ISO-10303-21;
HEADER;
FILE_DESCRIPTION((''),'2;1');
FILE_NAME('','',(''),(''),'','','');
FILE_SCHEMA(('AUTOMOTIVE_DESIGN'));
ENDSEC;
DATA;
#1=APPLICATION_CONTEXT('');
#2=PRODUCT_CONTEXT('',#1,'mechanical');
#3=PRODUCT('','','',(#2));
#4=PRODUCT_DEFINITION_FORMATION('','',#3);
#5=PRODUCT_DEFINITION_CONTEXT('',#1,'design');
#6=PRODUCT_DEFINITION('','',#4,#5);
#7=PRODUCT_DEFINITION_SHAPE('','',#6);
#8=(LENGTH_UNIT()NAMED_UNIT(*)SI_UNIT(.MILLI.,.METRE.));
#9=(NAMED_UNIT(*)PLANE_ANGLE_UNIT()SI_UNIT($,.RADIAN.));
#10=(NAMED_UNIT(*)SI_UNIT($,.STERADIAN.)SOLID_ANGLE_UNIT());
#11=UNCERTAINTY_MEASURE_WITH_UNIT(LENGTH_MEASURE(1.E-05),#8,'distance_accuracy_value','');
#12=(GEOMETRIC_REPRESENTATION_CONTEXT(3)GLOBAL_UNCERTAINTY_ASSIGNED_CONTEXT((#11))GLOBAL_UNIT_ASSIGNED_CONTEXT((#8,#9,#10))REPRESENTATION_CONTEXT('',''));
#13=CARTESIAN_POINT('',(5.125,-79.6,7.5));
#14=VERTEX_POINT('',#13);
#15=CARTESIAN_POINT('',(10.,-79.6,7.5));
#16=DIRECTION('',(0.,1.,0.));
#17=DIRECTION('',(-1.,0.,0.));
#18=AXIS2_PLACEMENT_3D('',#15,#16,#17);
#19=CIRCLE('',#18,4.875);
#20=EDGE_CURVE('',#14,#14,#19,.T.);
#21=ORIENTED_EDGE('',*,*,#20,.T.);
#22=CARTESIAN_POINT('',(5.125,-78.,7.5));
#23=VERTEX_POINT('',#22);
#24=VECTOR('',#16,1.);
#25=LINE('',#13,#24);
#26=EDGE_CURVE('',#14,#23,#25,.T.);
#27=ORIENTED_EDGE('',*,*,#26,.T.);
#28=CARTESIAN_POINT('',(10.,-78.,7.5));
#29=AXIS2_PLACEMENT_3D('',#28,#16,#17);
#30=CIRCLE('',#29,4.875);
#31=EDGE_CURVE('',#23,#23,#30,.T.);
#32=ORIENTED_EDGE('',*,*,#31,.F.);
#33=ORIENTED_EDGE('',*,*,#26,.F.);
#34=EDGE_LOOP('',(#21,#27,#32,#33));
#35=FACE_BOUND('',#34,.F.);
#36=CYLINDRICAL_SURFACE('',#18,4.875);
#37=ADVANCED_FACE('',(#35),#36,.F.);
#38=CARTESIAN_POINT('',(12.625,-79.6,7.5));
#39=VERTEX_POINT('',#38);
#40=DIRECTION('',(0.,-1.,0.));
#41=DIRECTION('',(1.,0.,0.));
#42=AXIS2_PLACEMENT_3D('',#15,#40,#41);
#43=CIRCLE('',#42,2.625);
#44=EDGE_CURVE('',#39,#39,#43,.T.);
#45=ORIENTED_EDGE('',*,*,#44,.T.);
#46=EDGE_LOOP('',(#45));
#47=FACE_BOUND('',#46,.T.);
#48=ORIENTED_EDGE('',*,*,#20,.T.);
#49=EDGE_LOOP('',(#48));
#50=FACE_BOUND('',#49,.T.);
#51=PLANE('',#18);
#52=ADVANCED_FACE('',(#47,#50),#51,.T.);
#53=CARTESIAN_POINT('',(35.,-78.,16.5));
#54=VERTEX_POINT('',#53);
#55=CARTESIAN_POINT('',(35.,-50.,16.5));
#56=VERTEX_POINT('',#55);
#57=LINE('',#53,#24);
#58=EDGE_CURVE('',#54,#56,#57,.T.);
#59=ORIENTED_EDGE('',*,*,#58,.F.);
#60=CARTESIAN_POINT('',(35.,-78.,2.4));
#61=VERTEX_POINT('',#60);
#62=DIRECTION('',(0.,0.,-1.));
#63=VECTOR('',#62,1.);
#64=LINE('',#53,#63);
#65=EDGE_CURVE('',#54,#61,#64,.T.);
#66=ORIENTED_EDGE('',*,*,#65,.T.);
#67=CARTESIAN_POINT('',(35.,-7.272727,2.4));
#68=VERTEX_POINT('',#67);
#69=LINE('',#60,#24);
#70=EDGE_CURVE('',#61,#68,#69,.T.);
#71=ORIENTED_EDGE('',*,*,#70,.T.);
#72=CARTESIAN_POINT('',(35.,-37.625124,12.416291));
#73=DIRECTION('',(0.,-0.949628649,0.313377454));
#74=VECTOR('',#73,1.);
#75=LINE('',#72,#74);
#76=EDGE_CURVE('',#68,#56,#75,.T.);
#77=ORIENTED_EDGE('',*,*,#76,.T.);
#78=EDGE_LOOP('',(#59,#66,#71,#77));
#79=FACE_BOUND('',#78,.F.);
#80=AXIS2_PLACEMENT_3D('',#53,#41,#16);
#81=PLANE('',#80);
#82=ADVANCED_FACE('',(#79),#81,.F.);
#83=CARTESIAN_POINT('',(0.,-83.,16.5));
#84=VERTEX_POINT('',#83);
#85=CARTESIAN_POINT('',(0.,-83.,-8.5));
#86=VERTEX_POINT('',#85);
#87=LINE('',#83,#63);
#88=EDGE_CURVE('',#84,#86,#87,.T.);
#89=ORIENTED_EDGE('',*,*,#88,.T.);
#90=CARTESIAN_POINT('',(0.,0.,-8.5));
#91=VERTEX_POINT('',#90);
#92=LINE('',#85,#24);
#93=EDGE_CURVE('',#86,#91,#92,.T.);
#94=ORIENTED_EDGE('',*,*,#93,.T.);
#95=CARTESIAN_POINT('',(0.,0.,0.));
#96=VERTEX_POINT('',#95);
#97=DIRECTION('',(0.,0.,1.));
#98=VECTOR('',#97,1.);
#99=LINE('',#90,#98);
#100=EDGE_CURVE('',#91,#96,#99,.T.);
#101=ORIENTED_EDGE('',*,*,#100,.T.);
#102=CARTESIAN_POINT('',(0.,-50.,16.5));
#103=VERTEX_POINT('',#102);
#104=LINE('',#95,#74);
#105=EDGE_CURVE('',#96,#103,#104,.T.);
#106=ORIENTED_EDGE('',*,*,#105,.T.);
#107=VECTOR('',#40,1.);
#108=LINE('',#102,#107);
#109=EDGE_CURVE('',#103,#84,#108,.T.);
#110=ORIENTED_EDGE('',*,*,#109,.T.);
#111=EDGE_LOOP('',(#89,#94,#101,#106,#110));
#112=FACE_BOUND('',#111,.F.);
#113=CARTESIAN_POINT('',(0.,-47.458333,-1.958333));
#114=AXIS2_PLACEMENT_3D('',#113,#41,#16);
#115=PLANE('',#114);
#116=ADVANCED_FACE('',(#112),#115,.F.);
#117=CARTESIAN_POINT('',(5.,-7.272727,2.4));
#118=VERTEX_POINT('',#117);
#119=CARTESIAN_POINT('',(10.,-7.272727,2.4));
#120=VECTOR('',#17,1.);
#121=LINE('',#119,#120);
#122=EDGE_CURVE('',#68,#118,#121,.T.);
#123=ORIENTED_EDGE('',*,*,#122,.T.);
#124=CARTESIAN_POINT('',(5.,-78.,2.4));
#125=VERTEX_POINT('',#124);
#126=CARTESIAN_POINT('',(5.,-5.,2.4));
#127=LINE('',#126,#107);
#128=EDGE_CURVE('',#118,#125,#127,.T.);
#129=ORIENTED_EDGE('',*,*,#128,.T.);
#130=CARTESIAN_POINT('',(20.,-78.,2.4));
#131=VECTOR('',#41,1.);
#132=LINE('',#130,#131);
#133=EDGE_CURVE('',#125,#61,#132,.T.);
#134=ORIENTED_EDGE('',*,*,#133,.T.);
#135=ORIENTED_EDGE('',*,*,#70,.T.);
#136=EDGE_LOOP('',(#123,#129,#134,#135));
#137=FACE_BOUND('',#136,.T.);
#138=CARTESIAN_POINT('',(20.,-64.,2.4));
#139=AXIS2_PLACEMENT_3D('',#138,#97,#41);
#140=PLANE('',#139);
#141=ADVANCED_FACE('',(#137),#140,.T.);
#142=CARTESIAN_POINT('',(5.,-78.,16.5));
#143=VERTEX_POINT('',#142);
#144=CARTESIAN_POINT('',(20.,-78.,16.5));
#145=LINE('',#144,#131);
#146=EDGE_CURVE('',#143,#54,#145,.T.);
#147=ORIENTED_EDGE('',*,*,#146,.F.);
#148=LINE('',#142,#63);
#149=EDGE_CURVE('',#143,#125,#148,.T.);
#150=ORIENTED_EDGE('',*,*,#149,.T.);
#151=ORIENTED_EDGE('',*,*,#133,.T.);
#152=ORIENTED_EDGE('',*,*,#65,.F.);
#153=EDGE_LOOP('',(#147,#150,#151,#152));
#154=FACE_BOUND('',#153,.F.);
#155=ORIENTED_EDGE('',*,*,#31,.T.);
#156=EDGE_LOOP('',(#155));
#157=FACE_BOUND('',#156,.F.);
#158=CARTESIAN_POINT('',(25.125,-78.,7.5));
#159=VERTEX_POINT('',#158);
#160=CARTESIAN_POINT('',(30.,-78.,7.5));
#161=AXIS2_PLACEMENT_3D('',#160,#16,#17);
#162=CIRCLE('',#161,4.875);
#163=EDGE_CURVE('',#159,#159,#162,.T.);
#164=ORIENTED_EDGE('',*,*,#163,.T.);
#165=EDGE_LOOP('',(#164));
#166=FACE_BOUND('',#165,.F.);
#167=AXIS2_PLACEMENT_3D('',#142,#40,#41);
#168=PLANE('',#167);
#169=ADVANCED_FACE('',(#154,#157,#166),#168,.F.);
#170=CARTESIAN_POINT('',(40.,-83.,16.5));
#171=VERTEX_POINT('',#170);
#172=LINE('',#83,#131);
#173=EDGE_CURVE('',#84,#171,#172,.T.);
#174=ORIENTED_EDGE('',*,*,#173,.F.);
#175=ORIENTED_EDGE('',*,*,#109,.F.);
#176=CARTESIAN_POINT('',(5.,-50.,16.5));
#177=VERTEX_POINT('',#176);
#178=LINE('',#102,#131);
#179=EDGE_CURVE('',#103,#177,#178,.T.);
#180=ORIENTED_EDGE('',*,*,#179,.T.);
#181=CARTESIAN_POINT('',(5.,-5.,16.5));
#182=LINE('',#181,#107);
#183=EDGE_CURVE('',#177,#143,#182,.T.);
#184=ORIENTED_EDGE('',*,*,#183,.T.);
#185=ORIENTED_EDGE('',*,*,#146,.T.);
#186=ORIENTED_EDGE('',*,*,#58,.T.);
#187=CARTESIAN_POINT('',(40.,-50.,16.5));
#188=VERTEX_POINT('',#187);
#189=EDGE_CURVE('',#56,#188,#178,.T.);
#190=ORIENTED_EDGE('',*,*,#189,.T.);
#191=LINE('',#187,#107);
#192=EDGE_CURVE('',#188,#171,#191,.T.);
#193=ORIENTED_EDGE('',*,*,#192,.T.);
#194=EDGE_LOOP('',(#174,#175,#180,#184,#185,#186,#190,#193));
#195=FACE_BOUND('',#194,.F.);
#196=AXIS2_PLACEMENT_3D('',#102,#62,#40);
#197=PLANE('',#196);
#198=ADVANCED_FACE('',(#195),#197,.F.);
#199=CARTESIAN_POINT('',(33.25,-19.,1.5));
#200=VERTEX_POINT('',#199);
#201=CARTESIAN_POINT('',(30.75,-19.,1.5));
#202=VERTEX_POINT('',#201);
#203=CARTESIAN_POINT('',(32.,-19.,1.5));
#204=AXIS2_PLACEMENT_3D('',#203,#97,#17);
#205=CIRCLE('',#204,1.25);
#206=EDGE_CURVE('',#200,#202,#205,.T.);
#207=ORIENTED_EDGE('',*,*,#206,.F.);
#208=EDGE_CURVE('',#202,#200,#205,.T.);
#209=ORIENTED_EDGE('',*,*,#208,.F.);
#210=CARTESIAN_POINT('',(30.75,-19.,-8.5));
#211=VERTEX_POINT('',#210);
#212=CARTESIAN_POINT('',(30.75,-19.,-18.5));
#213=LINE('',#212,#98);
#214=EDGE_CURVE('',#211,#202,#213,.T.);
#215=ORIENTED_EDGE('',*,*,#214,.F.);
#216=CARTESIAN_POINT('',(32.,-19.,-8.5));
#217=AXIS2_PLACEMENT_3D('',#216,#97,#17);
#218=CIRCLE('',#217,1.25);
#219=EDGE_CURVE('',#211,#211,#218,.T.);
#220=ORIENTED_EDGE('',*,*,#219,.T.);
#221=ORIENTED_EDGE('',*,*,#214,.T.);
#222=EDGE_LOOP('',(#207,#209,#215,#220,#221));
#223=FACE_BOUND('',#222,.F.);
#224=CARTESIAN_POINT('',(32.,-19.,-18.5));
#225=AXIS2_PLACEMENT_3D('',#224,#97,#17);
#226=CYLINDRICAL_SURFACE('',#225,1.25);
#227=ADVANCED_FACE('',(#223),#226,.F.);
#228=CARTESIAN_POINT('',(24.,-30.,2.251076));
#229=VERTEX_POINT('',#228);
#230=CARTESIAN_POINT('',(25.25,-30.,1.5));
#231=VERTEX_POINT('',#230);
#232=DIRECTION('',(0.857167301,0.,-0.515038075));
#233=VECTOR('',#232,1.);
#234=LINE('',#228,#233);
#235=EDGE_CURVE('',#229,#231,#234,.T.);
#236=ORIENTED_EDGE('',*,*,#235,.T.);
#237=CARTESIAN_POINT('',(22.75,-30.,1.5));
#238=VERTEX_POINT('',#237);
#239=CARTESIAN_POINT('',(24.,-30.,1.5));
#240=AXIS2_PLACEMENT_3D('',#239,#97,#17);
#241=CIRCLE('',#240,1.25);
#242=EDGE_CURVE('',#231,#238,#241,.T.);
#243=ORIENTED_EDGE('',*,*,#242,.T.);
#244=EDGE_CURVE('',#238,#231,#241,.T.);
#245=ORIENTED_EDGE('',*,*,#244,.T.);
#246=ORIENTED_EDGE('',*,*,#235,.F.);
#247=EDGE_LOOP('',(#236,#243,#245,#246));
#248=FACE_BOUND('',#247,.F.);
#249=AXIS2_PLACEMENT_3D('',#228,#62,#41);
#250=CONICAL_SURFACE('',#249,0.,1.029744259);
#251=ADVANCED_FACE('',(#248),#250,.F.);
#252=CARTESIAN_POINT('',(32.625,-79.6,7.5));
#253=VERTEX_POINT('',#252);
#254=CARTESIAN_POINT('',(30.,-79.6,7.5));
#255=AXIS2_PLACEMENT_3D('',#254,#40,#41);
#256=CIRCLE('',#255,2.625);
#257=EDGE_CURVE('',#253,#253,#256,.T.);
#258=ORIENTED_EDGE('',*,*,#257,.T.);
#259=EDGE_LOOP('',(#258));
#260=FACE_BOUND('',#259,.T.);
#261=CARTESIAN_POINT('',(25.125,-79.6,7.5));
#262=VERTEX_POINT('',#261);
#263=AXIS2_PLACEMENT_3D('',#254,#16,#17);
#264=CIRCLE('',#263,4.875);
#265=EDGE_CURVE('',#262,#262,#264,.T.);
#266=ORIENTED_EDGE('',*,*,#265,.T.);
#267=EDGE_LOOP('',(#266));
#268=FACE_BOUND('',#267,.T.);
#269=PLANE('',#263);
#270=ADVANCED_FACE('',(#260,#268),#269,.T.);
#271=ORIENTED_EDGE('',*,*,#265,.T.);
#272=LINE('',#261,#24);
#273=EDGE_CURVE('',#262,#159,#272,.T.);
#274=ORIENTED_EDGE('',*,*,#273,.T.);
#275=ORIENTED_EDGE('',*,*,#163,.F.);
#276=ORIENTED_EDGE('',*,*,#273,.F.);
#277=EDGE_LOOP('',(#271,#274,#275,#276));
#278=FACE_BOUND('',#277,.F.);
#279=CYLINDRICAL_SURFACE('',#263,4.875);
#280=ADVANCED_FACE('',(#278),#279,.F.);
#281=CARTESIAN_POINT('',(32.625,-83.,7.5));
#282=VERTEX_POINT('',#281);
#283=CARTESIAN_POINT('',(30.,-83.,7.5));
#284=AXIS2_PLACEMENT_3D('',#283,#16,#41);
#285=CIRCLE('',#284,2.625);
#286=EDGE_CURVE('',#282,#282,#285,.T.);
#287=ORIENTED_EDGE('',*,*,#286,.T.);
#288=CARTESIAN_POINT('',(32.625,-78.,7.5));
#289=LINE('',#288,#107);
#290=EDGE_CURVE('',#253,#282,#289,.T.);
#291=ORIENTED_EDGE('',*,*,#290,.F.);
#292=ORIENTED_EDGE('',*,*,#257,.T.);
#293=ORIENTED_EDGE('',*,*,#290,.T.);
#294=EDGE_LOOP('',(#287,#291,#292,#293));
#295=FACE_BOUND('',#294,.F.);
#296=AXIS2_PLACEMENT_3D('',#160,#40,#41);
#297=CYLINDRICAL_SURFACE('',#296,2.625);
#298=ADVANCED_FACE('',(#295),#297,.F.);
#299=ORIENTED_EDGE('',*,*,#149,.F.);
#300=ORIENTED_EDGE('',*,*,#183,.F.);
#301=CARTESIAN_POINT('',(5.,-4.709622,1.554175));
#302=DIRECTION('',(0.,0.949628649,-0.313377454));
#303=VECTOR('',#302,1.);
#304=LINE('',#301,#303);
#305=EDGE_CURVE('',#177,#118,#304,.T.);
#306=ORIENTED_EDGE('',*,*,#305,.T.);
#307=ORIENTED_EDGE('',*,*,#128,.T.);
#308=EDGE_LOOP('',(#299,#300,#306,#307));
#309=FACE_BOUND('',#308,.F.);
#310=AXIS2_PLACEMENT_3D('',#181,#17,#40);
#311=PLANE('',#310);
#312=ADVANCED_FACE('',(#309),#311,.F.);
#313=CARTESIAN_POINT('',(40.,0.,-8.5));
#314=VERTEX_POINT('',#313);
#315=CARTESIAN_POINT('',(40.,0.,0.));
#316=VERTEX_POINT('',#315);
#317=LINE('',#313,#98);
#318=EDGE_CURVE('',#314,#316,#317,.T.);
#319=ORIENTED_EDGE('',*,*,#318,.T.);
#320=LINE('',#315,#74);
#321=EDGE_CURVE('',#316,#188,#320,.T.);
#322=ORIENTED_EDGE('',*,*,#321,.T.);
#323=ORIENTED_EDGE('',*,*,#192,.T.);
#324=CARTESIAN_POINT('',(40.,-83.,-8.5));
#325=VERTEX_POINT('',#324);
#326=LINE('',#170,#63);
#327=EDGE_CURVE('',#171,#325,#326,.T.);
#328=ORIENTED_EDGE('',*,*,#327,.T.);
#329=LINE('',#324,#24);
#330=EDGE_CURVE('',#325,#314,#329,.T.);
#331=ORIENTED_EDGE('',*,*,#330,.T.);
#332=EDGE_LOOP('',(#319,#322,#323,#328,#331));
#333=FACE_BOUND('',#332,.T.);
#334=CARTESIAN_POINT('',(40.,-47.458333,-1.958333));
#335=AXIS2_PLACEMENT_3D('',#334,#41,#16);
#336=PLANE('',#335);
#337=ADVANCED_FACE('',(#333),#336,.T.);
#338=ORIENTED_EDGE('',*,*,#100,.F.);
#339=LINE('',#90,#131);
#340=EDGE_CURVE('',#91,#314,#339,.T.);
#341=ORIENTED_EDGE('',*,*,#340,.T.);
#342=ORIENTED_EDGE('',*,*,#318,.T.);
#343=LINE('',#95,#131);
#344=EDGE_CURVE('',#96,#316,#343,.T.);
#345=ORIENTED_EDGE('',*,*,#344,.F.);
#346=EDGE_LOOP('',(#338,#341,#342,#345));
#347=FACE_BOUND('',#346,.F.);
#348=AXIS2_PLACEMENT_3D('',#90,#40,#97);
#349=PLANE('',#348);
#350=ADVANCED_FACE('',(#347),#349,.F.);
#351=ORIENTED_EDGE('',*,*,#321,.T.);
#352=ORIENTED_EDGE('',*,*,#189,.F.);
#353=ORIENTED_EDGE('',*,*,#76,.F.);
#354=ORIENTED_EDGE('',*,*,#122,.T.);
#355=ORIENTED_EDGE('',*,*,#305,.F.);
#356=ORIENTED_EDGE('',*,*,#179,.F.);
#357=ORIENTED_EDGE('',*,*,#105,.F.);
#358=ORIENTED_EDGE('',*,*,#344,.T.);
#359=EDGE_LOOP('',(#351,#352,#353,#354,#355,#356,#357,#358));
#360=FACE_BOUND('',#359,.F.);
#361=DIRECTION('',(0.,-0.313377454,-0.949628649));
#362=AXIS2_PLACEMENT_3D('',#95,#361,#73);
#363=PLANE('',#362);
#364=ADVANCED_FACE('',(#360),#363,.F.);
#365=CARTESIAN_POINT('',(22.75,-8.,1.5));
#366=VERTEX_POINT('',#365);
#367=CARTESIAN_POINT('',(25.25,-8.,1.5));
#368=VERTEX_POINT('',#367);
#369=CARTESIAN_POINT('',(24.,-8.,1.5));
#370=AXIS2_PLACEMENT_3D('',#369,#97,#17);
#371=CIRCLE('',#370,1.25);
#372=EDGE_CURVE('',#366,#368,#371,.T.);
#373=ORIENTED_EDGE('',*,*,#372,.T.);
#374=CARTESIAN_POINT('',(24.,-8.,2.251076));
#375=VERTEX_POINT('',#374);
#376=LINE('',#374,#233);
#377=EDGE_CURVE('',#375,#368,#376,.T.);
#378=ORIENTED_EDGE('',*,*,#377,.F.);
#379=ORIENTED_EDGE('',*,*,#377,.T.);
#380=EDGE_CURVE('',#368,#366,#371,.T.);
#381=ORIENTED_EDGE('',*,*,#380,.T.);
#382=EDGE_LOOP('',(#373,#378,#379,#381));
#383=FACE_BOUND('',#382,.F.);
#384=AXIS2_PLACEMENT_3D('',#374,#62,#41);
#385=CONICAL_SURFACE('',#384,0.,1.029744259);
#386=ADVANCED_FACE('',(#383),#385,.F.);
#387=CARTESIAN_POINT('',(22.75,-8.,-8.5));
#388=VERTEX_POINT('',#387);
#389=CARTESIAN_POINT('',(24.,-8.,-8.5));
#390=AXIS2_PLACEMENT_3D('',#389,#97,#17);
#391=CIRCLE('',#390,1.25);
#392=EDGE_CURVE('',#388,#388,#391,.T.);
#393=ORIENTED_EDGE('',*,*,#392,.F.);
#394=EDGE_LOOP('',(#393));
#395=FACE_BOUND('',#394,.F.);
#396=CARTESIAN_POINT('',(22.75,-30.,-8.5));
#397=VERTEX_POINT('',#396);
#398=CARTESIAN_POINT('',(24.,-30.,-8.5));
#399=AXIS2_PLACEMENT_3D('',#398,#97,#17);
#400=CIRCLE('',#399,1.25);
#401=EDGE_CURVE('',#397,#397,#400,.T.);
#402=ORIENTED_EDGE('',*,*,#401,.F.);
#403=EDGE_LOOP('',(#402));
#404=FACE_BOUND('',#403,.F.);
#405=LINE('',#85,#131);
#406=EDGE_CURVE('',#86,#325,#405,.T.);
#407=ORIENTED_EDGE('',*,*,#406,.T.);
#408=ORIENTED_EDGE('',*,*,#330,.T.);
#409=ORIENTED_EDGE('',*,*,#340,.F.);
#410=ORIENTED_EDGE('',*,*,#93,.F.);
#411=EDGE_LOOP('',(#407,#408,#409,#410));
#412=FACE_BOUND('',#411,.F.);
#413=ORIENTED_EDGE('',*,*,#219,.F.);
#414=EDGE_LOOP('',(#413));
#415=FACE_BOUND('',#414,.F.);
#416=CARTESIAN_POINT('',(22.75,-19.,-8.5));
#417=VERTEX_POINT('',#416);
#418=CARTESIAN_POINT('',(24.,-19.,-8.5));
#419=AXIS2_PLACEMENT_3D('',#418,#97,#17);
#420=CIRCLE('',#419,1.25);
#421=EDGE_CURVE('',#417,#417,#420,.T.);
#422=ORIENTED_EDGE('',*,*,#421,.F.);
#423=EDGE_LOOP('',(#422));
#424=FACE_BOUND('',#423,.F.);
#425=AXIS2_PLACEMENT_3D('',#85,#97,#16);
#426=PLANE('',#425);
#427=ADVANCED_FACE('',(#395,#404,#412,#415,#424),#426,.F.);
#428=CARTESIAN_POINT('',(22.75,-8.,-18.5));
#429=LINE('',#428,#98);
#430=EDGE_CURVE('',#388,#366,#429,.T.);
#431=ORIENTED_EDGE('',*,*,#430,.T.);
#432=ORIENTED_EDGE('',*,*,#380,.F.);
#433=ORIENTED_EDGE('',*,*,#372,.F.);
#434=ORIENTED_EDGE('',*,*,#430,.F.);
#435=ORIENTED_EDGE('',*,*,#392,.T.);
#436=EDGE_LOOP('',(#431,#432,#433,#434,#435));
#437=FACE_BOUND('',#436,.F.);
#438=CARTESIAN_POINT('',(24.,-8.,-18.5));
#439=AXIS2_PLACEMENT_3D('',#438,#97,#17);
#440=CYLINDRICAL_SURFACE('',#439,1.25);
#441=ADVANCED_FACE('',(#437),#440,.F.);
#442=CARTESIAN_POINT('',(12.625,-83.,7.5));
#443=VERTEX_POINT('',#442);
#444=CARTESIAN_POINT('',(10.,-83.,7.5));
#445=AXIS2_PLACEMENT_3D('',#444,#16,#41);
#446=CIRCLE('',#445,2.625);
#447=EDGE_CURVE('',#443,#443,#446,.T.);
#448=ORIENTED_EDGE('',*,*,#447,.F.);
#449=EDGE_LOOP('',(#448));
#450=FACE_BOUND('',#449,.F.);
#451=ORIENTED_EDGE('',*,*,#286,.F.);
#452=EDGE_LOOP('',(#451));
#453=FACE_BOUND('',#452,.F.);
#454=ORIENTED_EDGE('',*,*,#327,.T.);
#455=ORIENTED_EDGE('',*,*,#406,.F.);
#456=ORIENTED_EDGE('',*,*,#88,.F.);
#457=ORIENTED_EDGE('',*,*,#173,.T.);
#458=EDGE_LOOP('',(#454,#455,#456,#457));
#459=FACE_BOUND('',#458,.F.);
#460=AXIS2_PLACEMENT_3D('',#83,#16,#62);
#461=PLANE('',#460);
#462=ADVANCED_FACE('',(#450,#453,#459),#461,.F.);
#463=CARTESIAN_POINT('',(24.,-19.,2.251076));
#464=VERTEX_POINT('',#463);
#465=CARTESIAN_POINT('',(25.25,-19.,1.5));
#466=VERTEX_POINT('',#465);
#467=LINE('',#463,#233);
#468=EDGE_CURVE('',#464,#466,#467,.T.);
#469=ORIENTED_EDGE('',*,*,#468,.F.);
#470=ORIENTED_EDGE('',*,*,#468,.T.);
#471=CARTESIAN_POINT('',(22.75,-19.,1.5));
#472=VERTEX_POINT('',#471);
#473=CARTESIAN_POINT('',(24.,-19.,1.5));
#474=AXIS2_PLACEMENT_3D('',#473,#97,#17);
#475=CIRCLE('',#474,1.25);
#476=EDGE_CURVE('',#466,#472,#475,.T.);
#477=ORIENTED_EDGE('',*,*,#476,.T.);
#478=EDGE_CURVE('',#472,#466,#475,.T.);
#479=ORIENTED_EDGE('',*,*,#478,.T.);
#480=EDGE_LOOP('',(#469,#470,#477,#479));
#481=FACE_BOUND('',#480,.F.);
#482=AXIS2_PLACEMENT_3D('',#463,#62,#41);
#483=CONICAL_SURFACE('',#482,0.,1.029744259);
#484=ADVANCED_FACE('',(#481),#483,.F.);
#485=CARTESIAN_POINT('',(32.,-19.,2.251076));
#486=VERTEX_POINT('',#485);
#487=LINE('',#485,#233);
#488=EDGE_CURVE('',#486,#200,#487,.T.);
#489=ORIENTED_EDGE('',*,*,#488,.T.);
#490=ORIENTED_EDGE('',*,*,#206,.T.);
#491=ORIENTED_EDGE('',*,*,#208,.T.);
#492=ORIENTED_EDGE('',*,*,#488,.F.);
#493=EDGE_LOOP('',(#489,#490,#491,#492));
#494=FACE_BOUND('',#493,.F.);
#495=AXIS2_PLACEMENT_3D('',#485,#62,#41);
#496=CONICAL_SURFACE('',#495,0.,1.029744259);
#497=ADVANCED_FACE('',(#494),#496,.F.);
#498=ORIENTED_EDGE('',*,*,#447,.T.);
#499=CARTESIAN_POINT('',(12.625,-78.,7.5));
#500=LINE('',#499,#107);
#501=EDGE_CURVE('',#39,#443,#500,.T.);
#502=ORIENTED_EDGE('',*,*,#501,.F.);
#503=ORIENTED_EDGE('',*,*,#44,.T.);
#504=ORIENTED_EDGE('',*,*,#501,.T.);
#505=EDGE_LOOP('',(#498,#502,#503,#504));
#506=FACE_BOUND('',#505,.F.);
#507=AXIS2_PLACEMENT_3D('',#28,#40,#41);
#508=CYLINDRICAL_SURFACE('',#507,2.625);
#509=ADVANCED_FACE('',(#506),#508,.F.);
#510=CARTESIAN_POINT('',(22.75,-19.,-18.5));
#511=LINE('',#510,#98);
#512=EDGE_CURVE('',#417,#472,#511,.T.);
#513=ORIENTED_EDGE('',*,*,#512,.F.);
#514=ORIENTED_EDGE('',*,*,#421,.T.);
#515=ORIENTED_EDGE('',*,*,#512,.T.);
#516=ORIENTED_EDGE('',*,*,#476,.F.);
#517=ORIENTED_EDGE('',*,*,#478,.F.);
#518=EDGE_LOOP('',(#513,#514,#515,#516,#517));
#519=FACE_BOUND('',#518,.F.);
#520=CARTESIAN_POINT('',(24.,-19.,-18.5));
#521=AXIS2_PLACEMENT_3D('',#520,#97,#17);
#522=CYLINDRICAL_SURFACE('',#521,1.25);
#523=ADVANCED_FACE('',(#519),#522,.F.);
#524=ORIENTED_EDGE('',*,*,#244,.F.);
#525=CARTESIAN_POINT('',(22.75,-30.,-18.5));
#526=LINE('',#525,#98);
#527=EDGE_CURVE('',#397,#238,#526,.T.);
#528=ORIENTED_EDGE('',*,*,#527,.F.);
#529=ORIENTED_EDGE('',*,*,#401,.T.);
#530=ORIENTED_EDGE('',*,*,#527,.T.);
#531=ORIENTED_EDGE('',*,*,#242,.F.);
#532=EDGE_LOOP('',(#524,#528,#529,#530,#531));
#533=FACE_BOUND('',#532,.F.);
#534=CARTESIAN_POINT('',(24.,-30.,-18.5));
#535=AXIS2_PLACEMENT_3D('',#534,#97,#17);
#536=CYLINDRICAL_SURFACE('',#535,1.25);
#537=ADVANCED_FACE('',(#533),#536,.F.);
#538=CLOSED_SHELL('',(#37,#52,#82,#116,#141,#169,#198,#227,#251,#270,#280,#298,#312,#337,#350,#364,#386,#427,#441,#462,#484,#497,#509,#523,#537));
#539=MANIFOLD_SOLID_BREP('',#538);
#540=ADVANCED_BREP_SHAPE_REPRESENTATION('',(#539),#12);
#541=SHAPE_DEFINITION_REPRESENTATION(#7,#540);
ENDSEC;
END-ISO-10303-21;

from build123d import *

# Parameters (mm, degrees)
F1_DEPTH       = 40
F3_W           = 30
F3_H           = 28
F3_H_2         = 45
F4_DEPTH       = 14.1
F6_D           = 5.25
F6_DEPTH       = 5
F6_CBORE_D     = 9.75
F6_CBORE_DEPTH = 1.6
F6_TIP         = 1.5772591249
F7_D           = 2.5
F7_DEPTH       = 10
F7_TIP         = 0.7510757738


# Not quite as in the source:
# - a feature names something its author has since deleted; it is built from what else it names


with BuildPart() as f1:
    # F0 (on Right) → F1 (new body)
    with BuildSketch(Plane.YZ):
        Polygon((0, 0), (-78, 0), (-78, 16.5), (-83, 16.5), (-83, -8.5), (0, -8.5), align=None)
        Polygon((-78, 16.5), (-78, 0), (0, 0), (-50, 16.5), align=None)
    extrude(amount=F1_DEPTH)

    # F3 (on face) → F4 (cut)
    with BuildSketch(Plane.XY.offset(16.5)):
        with Locations((20, -64)):
            Rectangle(F3_W, F3_H)
        with Locations((20, -27.5)):
            Rectangle(F3_W, F3_H_2)
    extrude(amount=-F4_DEPTH, mode=Mode.SUBTRACT)

    # F6
    with Locations(Plane(origin=(0, -78, 0), x_dir=(-1, 0, 0), z_dir=(0, 1, 0))):
        with Locations((-30, 7.5), (-10, 7.5)):
            CounterBoreHole(F6_D / 2, F6_CBORE_D / 2, F6_CBORE_DEPTH, depth=F6_DEPTH)
            with Locations((0, 0, -(F6_DEPTH + F6_TIP / 2))):  # 118° drill point
                Cone(0, F6_D / 2, F6_TIP, mode=Mode.SUBTRACT)

    # F7
    with Locations(Plane(origin=(0, 0, -8.5), x_dir=(1, 0, 0), z_dir=(0, 0, -1))):
        with Locations((24, 30), (24, 19), (32, 19), (24, 8)):
            Hole(F7_D / 2, depth=F7_DEPTH)
            with Locations((0, 0, -(F7_DEPTH + F7_TIP / 2))):  # 118° drill point
                Cone(0, F7_D / 2, F7_TIP, mode=Mode.SUBTRACT)


solid = f1.part
